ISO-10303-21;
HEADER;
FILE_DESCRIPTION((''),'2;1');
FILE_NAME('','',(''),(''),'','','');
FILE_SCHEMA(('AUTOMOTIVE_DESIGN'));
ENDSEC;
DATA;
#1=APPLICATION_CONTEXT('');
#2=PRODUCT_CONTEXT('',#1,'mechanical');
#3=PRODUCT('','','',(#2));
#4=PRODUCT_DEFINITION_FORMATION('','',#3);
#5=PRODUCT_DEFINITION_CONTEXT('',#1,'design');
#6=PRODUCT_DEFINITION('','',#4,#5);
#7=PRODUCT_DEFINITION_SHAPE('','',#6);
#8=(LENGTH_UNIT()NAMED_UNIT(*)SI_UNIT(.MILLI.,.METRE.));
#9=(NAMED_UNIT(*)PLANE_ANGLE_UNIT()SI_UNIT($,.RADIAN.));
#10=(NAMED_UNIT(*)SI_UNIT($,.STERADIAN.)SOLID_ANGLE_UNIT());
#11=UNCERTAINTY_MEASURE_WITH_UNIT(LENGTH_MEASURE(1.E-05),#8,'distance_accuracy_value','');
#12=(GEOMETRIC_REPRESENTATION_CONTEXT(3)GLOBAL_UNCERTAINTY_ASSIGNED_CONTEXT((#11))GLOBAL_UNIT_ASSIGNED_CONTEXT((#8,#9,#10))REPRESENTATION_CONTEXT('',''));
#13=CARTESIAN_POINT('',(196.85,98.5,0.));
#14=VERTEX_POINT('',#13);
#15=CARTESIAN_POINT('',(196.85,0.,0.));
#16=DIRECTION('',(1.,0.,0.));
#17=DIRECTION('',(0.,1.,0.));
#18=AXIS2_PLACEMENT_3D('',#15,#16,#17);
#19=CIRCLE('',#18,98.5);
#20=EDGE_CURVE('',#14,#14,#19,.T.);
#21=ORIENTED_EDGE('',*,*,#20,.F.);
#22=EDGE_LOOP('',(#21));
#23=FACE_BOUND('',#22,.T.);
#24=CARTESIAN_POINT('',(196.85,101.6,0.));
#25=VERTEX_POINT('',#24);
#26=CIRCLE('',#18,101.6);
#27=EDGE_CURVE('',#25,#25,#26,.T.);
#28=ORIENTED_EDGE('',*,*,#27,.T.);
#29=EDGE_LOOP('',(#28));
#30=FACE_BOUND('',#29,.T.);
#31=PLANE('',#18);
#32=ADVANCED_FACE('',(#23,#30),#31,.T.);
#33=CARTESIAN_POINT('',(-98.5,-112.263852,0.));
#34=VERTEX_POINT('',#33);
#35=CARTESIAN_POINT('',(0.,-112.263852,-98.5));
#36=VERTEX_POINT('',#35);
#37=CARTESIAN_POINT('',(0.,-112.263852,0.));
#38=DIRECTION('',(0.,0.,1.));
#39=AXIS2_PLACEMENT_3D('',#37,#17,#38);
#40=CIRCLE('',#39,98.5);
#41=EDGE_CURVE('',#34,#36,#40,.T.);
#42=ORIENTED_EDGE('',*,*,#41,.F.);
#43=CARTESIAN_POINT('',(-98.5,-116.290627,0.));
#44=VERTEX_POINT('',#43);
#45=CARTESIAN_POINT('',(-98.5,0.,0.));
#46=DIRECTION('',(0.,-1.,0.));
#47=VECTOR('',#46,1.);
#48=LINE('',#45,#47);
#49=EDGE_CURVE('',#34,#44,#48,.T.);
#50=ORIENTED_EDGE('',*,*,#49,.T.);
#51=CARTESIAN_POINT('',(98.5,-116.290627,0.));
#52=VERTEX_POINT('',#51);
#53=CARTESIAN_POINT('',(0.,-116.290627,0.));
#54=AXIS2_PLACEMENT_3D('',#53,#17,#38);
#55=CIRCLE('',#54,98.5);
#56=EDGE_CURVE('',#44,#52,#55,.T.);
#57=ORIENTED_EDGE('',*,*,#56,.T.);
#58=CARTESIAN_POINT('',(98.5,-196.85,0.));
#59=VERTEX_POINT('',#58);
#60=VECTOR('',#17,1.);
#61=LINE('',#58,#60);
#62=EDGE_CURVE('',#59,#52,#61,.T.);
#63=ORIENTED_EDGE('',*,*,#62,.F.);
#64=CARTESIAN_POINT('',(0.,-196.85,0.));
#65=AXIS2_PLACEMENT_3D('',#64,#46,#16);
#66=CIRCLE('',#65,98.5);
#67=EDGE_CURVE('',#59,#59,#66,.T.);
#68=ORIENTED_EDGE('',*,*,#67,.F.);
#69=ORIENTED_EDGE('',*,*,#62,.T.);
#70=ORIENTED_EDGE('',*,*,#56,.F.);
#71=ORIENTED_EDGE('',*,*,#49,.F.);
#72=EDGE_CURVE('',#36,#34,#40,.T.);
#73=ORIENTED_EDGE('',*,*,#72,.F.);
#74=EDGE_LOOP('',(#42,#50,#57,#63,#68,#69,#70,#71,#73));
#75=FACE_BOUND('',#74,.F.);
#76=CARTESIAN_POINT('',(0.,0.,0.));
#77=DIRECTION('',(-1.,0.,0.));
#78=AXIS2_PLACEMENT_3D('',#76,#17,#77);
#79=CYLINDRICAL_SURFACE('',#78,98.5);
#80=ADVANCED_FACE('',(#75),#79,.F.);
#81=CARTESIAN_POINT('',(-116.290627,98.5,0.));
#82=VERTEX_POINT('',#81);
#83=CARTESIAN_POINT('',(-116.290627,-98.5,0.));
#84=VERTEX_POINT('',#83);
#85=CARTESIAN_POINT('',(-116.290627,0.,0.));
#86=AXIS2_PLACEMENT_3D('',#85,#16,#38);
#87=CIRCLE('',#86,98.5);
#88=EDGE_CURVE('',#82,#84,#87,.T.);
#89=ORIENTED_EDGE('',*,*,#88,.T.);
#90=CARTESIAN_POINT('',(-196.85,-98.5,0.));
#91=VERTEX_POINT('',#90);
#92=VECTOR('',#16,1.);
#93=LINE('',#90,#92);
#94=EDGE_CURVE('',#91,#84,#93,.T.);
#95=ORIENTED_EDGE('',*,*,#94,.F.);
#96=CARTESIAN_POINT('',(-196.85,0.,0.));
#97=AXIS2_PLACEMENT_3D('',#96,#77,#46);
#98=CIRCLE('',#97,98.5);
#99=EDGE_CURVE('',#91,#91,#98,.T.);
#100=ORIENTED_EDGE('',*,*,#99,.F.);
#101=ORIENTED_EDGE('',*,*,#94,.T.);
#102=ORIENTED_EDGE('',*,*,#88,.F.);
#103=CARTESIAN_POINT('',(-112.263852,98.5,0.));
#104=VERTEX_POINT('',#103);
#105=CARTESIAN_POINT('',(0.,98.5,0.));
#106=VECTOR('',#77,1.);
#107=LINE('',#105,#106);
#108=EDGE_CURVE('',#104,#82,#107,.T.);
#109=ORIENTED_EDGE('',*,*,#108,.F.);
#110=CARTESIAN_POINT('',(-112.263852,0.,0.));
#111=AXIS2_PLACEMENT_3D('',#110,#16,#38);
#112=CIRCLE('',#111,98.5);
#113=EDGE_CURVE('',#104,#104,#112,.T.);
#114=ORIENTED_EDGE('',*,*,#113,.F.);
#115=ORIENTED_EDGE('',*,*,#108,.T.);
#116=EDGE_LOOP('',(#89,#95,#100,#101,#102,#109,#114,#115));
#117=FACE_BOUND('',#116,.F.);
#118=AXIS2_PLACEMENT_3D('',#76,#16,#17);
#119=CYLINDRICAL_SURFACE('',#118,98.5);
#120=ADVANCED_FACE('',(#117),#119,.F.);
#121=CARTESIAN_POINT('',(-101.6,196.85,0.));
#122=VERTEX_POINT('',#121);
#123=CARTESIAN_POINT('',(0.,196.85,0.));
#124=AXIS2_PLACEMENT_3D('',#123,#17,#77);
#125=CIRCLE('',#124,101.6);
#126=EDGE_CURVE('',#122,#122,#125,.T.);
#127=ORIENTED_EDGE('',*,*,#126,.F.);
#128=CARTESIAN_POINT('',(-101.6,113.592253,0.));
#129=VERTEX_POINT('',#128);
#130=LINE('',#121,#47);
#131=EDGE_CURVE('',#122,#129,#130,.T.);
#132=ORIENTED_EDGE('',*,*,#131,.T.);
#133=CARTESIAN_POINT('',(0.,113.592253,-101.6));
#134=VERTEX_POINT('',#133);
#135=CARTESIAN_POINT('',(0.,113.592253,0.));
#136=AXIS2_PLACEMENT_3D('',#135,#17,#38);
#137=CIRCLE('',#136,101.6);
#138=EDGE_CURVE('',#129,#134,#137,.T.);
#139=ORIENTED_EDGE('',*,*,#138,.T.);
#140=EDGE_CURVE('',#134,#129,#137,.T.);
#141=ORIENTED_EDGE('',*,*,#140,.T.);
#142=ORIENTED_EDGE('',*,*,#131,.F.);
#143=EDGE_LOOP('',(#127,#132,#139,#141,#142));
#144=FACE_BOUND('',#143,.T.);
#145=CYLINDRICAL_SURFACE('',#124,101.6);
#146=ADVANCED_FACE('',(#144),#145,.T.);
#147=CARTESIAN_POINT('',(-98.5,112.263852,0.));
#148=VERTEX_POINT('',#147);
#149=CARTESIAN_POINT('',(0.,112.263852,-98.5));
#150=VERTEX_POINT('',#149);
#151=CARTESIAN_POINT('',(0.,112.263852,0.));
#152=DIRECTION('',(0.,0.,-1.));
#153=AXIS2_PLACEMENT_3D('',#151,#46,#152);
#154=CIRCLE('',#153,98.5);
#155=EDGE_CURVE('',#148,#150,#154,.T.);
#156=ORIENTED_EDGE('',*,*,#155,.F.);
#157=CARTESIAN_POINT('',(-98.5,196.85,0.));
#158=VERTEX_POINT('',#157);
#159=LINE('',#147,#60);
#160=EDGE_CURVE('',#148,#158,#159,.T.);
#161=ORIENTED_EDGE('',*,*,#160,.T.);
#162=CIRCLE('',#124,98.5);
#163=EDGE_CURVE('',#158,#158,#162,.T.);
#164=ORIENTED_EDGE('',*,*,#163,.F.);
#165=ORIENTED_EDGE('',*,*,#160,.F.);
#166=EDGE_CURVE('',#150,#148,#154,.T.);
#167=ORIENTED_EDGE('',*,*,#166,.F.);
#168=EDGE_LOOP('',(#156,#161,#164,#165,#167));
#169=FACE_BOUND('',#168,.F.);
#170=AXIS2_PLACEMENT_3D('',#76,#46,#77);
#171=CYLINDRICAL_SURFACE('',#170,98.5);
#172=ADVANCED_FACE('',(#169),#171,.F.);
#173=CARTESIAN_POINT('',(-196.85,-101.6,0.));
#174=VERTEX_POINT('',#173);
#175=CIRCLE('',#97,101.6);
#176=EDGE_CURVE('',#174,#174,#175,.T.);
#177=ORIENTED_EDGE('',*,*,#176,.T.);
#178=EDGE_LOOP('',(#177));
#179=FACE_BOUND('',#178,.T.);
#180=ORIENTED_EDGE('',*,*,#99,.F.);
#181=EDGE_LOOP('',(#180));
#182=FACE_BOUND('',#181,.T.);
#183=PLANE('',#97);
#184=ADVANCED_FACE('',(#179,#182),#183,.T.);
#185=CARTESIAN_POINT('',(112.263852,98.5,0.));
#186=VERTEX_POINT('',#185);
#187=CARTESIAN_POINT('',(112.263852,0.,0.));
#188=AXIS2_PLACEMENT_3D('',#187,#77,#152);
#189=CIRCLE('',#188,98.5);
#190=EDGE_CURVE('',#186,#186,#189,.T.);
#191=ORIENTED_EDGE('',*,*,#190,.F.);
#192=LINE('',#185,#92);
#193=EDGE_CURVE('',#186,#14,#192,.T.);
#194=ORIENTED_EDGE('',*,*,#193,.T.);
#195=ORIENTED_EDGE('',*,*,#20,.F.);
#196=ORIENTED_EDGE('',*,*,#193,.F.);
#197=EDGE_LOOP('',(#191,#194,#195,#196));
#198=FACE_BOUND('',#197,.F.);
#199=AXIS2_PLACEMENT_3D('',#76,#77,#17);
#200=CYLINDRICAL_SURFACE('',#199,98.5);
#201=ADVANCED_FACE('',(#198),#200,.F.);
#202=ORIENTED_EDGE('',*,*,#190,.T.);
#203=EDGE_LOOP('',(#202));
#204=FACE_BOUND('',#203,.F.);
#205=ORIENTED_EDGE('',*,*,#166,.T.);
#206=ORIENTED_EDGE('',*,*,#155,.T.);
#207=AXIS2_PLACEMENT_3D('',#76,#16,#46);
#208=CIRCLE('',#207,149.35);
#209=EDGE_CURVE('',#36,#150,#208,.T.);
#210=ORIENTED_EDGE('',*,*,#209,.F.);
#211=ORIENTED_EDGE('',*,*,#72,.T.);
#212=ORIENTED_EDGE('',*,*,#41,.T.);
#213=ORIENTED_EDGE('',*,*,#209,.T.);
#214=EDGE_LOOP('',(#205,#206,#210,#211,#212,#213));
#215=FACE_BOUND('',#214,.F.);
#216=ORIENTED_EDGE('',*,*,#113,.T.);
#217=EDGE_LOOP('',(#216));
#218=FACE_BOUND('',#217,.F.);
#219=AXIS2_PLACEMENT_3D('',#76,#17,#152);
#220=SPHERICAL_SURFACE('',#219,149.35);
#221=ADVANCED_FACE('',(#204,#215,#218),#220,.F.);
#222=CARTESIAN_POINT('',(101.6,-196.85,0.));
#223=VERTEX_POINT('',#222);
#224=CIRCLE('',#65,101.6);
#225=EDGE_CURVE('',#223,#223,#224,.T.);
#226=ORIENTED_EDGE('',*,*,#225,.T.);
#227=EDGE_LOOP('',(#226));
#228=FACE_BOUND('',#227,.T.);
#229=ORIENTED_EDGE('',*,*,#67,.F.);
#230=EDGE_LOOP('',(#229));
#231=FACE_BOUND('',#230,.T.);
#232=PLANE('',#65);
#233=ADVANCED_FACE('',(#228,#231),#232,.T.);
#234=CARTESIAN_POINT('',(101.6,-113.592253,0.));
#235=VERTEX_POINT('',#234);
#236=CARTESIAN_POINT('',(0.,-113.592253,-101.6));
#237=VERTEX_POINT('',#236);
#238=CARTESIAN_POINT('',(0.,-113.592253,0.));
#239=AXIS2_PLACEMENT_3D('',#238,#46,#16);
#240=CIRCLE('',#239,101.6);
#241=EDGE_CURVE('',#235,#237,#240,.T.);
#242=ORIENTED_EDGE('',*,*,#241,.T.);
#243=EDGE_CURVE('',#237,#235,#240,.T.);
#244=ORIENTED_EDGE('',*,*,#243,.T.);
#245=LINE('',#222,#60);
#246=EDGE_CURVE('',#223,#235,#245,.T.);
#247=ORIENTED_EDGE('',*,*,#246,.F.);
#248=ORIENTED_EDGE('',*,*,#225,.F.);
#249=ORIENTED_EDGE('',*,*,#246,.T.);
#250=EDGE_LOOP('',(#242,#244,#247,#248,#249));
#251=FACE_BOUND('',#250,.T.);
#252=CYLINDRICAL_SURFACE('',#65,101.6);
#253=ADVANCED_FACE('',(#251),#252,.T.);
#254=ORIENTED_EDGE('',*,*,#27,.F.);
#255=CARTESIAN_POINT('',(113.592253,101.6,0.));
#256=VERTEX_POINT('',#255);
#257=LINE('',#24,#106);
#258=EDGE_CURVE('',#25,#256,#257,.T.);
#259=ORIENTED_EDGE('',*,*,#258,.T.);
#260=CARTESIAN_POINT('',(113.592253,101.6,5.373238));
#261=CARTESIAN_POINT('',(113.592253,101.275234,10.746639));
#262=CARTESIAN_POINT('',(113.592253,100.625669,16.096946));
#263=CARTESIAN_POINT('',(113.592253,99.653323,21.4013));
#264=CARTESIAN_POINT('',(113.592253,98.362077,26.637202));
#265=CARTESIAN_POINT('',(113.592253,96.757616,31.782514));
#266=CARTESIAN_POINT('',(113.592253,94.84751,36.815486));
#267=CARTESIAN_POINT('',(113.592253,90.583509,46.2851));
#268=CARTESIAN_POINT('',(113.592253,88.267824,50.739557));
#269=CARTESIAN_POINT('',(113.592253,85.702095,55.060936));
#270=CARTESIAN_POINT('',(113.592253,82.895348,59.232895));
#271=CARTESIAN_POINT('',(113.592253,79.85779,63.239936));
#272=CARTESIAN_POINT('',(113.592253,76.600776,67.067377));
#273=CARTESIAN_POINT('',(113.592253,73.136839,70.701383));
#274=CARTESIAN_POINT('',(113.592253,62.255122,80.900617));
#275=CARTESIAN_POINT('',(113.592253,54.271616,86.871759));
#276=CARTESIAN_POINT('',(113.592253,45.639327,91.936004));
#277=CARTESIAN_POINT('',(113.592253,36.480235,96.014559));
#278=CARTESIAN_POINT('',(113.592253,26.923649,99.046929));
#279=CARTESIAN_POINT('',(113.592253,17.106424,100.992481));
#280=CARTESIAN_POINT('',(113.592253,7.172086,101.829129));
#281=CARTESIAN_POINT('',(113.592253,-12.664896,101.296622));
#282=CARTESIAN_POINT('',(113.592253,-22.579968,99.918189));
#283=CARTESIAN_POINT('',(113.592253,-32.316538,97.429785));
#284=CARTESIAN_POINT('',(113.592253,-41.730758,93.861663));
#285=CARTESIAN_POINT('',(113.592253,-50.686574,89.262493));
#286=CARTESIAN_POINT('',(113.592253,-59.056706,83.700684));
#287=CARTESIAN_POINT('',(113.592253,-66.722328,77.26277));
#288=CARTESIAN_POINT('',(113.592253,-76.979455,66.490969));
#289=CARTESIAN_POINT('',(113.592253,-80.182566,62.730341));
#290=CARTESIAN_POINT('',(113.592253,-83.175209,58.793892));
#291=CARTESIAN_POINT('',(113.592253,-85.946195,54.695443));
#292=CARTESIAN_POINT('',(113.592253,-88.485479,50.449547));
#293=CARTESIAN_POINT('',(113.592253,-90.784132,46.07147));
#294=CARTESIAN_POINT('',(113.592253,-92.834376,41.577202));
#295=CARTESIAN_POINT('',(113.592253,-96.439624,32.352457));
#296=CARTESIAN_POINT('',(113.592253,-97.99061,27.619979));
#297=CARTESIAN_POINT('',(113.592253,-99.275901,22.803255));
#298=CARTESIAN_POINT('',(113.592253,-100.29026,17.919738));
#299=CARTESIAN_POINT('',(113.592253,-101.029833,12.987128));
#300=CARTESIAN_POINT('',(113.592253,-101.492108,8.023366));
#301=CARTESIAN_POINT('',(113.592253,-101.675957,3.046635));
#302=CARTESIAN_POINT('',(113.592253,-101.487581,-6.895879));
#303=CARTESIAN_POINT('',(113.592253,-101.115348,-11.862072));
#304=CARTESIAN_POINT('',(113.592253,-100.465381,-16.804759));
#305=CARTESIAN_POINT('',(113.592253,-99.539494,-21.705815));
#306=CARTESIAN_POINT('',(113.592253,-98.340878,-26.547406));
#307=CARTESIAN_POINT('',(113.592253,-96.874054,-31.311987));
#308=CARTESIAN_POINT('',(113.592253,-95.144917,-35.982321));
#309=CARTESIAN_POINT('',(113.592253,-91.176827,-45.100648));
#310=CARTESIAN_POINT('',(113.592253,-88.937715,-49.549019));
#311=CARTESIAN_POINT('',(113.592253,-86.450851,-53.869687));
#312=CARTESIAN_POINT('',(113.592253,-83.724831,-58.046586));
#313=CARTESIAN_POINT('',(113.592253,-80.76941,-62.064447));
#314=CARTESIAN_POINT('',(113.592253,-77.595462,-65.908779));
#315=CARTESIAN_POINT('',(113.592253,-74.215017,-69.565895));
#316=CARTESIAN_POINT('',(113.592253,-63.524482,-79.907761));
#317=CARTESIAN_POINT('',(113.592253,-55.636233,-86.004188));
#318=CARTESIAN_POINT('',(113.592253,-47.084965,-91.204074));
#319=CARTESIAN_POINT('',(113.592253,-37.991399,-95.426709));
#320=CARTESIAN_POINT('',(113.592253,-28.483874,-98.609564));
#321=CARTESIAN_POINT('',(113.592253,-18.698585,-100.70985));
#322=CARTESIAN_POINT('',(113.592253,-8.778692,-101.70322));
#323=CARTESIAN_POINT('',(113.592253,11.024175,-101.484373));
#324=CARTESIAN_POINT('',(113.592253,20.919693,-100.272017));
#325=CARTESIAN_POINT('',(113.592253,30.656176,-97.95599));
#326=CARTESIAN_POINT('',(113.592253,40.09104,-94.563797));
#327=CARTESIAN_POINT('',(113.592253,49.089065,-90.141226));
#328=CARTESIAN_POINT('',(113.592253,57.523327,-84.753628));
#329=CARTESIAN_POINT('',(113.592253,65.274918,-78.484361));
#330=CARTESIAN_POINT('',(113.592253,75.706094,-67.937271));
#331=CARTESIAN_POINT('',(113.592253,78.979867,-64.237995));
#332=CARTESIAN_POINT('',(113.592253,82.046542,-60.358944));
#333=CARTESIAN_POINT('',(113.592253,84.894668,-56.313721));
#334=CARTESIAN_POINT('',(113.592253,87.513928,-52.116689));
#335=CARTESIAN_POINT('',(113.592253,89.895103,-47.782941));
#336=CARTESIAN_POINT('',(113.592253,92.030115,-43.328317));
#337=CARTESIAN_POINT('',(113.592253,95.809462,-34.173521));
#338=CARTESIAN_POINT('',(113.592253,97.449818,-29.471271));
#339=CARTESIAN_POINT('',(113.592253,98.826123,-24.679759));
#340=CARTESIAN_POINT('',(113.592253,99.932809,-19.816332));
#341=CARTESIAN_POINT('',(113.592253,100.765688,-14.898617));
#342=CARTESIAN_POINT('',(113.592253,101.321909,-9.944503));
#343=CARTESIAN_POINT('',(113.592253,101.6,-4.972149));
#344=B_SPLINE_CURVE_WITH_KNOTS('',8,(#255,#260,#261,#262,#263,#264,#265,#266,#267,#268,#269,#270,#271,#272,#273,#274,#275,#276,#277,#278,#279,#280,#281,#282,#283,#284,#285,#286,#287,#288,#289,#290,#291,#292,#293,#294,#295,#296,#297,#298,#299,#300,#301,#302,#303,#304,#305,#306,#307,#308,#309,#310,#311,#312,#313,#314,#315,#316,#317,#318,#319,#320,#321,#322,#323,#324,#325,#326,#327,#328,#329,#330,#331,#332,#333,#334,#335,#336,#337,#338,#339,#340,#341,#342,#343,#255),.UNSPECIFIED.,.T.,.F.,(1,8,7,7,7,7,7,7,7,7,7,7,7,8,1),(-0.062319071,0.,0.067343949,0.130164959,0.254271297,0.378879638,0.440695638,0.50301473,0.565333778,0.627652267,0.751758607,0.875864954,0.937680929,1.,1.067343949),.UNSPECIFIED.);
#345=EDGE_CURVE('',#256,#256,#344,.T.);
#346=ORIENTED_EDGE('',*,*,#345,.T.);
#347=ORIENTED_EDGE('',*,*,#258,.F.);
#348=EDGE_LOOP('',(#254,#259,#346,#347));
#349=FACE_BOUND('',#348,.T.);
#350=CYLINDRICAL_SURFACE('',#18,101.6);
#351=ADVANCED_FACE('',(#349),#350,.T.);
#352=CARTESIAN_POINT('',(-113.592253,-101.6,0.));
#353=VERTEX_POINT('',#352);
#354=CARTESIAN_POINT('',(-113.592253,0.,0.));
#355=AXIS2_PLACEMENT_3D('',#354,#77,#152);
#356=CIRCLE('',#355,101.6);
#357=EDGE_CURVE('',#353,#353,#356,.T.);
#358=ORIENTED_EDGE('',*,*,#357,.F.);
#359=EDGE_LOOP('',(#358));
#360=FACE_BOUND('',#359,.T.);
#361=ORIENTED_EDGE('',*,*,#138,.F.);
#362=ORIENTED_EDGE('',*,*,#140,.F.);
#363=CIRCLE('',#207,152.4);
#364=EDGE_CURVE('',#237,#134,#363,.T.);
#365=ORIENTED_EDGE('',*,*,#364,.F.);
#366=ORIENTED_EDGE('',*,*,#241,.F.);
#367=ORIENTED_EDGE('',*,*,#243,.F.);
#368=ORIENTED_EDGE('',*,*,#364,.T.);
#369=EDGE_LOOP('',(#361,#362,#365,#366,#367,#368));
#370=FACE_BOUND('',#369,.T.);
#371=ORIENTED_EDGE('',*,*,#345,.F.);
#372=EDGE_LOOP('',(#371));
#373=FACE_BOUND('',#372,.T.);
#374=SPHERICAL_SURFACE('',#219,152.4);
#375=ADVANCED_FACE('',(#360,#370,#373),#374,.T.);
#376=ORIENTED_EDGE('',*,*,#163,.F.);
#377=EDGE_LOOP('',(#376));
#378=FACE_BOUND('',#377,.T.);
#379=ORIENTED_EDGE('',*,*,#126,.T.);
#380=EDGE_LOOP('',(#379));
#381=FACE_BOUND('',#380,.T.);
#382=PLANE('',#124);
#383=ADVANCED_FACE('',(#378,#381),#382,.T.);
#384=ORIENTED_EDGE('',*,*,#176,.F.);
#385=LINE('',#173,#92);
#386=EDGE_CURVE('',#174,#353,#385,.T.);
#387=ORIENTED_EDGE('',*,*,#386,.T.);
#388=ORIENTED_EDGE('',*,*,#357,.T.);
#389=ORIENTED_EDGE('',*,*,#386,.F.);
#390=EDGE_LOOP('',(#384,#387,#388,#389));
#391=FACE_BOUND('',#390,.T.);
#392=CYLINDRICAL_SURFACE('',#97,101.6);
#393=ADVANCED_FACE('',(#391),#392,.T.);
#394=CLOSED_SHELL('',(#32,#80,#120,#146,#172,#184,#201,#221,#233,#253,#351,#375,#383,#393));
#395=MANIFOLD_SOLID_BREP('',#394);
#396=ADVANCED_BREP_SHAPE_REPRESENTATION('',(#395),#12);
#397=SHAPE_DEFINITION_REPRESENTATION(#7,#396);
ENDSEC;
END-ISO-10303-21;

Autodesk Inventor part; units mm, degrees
ref_plane "YZ Plane" through (0, 0, 0) normal (1, 0, 0) x (0, 1, 0)
ref_plane "XY Plane" through (0, 0, 0) normal (0, 0, 1) x (1, 0, 0)
sketch "Sketch1" plane through (0, 0, 0) normal (1, 0, 0) x (0, 1, 0)
  arc A0 (-152.4, 0) -> (152.4, 0) centre (0, 0) ccw
  arc A1 (-149.35, 0) -> (149.35, 0) centre (0, 0) ccw
  line L0 (152.4, 0) -> (149.35, 0)
  line L1 (-149.35, 0) -> (-152.4, 0)
  line L2 (-213.36, 0) -> (213.36, 0) projected
  dimension "d0" = 152.4
  dimension "d2" = 149.35
revolve "Revolution1" add sketch "Sketch1" angle 360 about axis through (0, -10, 0) along (0, 1, 0) contours L1 A1 L0 A0
sketch "Sketch2" plane through (0, 0, 0) normal (1, 0, 0) x (0, 1, 0)
  circle A0 centre (0, 0) radius 98.5
  dimension "d4" = 197
extrude "Extrusion1" cut sketch "Sketch2" along normal through all both and the other way through all
sketch "Sketch3" plane through (0, 0, 0) normal (0, 1, 0) x (-1, 0, 0)
  circle A0 centre (0, 0) radius 98.5
  dimension "d7" = 197
extrude "Extrusion2" cut sketch "Sketch3" along normal through all both and the other way through all
ref_plane "Work Plane1" through (0, 196.85, 0) normal (0, 1, 0) x (-1, 0, 0)
sketch "Sketch4" plane through (0, 196.85, 0) normal (0, 1, 0) x (-1, 0, 0)
  circle A0 centre (0, 0) radius 101.6
  circle A1 centre (0, 0) radius 98.5 projected
  circle A2 centre (0, 0) radius 98.5
  dimension "d11" = 203.2
  dimension "d12" = 197
extrude "Extrusion3" add sketch "Sketch4" against normal up to next
pattern_circular "Circular Pattern1" count 4 over 360 about axis through (0, 0, -10) along (0, 0, 1) of "Extrusion3"
properties part number "ISO_200_Cross_4way_Sphere"
